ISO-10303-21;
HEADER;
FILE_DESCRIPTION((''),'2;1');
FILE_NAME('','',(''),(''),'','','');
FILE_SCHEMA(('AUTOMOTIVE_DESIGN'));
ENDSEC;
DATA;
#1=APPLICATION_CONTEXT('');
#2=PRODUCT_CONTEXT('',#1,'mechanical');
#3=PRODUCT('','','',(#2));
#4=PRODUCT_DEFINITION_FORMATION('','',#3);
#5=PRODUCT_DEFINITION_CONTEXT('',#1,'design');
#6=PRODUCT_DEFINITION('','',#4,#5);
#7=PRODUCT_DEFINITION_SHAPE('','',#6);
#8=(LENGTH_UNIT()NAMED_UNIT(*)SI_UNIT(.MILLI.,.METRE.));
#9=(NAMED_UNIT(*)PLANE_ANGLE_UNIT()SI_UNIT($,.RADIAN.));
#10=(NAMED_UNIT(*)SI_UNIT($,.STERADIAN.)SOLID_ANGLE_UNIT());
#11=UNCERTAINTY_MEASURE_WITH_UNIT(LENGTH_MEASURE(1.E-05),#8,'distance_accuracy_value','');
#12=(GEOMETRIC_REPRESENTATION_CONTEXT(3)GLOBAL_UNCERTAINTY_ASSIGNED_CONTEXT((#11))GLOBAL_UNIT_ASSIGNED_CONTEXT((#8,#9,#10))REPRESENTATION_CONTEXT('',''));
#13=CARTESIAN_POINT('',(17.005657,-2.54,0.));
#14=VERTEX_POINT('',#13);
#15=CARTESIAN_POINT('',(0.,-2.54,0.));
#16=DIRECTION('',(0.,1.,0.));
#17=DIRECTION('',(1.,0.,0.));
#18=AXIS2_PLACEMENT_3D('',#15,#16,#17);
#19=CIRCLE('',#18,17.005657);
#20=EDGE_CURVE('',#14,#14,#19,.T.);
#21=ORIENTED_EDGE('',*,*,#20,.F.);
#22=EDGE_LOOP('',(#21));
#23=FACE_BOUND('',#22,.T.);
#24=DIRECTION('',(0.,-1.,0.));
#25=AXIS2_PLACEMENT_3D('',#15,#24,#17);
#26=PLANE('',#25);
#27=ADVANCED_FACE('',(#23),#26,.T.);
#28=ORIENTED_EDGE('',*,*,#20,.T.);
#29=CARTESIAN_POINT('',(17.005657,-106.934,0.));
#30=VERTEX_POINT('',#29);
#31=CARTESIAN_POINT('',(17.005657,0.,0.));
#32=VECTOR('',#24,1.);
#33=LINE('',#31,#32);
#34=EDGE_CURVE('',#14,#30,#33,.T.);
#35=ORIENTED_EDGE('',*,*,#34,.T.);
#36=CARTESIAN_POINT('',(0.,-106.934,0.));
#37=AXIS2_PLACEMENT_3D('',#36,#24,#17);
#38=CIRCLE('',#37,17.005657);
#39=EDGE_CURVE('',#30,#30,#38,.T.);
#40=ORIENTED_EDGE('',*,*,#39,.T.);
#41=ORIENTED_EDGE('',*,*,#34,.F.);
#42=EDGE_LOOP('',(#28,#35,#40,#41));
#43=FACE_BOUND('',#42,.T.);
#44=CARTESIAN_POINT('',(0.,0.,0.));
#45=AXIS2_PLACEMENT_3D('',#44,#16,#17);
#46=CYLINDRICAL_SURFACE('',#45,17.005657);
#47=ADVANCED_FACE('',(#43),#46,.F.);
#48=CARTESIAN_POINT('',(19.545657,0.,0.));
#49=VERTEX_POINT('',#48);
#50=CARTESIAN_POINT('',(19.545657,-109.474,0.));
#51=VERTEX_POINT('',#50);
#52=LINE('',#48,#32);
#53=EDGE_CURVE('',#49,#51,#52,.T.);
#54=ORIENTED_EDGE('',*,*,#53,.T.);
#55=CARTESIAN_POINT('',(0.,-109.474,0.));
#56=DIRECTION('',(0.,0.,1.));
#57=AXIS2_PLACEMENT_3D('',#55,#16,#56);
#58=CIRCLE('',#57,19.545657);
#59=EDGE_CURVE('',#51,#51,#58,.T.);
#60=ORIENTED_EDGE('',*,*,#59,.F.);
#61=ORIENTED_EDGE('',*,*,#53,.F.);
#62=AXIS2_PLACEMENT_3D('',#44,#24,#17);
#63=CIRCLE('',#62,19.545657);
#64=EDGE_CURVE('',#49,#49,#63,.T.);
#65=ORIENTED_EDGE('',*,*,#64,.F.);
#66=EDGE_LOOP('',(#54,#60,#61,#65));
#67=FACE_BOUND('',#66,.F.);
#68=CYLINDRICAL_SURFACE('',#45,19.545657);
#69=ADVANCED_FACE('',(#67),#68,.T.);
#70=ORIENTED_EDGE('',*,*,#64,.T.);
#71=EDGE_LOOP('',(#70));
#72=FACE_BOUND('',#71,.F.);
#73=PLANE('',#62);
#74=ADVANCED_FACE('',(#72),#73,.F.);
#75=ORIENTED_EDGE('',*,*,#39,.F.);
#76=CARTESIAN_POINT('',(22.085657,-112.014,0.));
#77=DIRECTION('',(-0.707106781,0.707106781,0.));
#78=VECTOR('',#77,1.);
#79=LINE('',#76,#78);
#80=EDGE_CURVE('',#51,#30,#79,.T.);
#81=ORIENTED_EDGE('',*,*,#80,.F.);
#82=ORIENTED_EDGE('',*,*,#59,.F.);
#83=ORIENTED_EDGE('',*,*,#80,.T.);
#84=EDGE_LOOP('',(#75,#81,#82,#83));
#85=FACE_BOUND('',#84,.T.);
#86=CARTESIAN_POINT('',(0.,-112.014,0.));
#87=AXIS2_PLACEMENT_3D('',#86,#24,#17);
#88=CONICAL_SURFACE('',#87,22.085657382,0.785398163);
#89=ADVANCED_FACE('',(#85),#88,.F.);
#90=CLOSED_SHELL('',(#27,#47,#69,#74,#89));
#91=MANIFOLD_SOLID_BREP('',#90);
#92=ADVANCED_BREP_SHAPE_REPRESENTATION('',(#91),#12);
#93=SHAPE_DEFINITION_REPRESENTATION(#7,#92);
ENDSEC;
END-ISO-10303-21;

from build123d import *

# Parameters (mm, degrees)
F0_R     = 19.5456573821
F1_DEPTH = 112.014
F2_T     = -2.54


# Not quite as in the source:
# - a fillet or chamfer that OpenCascade refuses, or shapes differently, is made with other operations: its cross-section is extruded or revolved along the edge and cut away or added


with BuildPart() as f1:
    # F0 (on Front) → F1 (new body)
    with BuildSketch(Plane.XZ):
        Circle(F0_R)
    extrude(amount=F1_DEPTH)

    # F2
    f2_openings = [f1.faces().sort_by_distance(p)[0] for p in [
        (0, -112.014, 0),
    ]]
    offset(amount=F2_T, openings=f2_openings)

    # F3: chamfer of 5.08 on 1 edges, made by hand

    # F3_s1 → F3_t2 (revolve, cut)
    with BuildSketch(Plane.XY):
        Polygon((22.0856573821, -112.014), (17.0056573821, -106.934), (17.0056573821, -112.014), align=None)
    revolve(axis=Axis((0, -112.014, 0), (0, -1, 0)), mode=Mode.SUBTRACT)


solid = f1.part
